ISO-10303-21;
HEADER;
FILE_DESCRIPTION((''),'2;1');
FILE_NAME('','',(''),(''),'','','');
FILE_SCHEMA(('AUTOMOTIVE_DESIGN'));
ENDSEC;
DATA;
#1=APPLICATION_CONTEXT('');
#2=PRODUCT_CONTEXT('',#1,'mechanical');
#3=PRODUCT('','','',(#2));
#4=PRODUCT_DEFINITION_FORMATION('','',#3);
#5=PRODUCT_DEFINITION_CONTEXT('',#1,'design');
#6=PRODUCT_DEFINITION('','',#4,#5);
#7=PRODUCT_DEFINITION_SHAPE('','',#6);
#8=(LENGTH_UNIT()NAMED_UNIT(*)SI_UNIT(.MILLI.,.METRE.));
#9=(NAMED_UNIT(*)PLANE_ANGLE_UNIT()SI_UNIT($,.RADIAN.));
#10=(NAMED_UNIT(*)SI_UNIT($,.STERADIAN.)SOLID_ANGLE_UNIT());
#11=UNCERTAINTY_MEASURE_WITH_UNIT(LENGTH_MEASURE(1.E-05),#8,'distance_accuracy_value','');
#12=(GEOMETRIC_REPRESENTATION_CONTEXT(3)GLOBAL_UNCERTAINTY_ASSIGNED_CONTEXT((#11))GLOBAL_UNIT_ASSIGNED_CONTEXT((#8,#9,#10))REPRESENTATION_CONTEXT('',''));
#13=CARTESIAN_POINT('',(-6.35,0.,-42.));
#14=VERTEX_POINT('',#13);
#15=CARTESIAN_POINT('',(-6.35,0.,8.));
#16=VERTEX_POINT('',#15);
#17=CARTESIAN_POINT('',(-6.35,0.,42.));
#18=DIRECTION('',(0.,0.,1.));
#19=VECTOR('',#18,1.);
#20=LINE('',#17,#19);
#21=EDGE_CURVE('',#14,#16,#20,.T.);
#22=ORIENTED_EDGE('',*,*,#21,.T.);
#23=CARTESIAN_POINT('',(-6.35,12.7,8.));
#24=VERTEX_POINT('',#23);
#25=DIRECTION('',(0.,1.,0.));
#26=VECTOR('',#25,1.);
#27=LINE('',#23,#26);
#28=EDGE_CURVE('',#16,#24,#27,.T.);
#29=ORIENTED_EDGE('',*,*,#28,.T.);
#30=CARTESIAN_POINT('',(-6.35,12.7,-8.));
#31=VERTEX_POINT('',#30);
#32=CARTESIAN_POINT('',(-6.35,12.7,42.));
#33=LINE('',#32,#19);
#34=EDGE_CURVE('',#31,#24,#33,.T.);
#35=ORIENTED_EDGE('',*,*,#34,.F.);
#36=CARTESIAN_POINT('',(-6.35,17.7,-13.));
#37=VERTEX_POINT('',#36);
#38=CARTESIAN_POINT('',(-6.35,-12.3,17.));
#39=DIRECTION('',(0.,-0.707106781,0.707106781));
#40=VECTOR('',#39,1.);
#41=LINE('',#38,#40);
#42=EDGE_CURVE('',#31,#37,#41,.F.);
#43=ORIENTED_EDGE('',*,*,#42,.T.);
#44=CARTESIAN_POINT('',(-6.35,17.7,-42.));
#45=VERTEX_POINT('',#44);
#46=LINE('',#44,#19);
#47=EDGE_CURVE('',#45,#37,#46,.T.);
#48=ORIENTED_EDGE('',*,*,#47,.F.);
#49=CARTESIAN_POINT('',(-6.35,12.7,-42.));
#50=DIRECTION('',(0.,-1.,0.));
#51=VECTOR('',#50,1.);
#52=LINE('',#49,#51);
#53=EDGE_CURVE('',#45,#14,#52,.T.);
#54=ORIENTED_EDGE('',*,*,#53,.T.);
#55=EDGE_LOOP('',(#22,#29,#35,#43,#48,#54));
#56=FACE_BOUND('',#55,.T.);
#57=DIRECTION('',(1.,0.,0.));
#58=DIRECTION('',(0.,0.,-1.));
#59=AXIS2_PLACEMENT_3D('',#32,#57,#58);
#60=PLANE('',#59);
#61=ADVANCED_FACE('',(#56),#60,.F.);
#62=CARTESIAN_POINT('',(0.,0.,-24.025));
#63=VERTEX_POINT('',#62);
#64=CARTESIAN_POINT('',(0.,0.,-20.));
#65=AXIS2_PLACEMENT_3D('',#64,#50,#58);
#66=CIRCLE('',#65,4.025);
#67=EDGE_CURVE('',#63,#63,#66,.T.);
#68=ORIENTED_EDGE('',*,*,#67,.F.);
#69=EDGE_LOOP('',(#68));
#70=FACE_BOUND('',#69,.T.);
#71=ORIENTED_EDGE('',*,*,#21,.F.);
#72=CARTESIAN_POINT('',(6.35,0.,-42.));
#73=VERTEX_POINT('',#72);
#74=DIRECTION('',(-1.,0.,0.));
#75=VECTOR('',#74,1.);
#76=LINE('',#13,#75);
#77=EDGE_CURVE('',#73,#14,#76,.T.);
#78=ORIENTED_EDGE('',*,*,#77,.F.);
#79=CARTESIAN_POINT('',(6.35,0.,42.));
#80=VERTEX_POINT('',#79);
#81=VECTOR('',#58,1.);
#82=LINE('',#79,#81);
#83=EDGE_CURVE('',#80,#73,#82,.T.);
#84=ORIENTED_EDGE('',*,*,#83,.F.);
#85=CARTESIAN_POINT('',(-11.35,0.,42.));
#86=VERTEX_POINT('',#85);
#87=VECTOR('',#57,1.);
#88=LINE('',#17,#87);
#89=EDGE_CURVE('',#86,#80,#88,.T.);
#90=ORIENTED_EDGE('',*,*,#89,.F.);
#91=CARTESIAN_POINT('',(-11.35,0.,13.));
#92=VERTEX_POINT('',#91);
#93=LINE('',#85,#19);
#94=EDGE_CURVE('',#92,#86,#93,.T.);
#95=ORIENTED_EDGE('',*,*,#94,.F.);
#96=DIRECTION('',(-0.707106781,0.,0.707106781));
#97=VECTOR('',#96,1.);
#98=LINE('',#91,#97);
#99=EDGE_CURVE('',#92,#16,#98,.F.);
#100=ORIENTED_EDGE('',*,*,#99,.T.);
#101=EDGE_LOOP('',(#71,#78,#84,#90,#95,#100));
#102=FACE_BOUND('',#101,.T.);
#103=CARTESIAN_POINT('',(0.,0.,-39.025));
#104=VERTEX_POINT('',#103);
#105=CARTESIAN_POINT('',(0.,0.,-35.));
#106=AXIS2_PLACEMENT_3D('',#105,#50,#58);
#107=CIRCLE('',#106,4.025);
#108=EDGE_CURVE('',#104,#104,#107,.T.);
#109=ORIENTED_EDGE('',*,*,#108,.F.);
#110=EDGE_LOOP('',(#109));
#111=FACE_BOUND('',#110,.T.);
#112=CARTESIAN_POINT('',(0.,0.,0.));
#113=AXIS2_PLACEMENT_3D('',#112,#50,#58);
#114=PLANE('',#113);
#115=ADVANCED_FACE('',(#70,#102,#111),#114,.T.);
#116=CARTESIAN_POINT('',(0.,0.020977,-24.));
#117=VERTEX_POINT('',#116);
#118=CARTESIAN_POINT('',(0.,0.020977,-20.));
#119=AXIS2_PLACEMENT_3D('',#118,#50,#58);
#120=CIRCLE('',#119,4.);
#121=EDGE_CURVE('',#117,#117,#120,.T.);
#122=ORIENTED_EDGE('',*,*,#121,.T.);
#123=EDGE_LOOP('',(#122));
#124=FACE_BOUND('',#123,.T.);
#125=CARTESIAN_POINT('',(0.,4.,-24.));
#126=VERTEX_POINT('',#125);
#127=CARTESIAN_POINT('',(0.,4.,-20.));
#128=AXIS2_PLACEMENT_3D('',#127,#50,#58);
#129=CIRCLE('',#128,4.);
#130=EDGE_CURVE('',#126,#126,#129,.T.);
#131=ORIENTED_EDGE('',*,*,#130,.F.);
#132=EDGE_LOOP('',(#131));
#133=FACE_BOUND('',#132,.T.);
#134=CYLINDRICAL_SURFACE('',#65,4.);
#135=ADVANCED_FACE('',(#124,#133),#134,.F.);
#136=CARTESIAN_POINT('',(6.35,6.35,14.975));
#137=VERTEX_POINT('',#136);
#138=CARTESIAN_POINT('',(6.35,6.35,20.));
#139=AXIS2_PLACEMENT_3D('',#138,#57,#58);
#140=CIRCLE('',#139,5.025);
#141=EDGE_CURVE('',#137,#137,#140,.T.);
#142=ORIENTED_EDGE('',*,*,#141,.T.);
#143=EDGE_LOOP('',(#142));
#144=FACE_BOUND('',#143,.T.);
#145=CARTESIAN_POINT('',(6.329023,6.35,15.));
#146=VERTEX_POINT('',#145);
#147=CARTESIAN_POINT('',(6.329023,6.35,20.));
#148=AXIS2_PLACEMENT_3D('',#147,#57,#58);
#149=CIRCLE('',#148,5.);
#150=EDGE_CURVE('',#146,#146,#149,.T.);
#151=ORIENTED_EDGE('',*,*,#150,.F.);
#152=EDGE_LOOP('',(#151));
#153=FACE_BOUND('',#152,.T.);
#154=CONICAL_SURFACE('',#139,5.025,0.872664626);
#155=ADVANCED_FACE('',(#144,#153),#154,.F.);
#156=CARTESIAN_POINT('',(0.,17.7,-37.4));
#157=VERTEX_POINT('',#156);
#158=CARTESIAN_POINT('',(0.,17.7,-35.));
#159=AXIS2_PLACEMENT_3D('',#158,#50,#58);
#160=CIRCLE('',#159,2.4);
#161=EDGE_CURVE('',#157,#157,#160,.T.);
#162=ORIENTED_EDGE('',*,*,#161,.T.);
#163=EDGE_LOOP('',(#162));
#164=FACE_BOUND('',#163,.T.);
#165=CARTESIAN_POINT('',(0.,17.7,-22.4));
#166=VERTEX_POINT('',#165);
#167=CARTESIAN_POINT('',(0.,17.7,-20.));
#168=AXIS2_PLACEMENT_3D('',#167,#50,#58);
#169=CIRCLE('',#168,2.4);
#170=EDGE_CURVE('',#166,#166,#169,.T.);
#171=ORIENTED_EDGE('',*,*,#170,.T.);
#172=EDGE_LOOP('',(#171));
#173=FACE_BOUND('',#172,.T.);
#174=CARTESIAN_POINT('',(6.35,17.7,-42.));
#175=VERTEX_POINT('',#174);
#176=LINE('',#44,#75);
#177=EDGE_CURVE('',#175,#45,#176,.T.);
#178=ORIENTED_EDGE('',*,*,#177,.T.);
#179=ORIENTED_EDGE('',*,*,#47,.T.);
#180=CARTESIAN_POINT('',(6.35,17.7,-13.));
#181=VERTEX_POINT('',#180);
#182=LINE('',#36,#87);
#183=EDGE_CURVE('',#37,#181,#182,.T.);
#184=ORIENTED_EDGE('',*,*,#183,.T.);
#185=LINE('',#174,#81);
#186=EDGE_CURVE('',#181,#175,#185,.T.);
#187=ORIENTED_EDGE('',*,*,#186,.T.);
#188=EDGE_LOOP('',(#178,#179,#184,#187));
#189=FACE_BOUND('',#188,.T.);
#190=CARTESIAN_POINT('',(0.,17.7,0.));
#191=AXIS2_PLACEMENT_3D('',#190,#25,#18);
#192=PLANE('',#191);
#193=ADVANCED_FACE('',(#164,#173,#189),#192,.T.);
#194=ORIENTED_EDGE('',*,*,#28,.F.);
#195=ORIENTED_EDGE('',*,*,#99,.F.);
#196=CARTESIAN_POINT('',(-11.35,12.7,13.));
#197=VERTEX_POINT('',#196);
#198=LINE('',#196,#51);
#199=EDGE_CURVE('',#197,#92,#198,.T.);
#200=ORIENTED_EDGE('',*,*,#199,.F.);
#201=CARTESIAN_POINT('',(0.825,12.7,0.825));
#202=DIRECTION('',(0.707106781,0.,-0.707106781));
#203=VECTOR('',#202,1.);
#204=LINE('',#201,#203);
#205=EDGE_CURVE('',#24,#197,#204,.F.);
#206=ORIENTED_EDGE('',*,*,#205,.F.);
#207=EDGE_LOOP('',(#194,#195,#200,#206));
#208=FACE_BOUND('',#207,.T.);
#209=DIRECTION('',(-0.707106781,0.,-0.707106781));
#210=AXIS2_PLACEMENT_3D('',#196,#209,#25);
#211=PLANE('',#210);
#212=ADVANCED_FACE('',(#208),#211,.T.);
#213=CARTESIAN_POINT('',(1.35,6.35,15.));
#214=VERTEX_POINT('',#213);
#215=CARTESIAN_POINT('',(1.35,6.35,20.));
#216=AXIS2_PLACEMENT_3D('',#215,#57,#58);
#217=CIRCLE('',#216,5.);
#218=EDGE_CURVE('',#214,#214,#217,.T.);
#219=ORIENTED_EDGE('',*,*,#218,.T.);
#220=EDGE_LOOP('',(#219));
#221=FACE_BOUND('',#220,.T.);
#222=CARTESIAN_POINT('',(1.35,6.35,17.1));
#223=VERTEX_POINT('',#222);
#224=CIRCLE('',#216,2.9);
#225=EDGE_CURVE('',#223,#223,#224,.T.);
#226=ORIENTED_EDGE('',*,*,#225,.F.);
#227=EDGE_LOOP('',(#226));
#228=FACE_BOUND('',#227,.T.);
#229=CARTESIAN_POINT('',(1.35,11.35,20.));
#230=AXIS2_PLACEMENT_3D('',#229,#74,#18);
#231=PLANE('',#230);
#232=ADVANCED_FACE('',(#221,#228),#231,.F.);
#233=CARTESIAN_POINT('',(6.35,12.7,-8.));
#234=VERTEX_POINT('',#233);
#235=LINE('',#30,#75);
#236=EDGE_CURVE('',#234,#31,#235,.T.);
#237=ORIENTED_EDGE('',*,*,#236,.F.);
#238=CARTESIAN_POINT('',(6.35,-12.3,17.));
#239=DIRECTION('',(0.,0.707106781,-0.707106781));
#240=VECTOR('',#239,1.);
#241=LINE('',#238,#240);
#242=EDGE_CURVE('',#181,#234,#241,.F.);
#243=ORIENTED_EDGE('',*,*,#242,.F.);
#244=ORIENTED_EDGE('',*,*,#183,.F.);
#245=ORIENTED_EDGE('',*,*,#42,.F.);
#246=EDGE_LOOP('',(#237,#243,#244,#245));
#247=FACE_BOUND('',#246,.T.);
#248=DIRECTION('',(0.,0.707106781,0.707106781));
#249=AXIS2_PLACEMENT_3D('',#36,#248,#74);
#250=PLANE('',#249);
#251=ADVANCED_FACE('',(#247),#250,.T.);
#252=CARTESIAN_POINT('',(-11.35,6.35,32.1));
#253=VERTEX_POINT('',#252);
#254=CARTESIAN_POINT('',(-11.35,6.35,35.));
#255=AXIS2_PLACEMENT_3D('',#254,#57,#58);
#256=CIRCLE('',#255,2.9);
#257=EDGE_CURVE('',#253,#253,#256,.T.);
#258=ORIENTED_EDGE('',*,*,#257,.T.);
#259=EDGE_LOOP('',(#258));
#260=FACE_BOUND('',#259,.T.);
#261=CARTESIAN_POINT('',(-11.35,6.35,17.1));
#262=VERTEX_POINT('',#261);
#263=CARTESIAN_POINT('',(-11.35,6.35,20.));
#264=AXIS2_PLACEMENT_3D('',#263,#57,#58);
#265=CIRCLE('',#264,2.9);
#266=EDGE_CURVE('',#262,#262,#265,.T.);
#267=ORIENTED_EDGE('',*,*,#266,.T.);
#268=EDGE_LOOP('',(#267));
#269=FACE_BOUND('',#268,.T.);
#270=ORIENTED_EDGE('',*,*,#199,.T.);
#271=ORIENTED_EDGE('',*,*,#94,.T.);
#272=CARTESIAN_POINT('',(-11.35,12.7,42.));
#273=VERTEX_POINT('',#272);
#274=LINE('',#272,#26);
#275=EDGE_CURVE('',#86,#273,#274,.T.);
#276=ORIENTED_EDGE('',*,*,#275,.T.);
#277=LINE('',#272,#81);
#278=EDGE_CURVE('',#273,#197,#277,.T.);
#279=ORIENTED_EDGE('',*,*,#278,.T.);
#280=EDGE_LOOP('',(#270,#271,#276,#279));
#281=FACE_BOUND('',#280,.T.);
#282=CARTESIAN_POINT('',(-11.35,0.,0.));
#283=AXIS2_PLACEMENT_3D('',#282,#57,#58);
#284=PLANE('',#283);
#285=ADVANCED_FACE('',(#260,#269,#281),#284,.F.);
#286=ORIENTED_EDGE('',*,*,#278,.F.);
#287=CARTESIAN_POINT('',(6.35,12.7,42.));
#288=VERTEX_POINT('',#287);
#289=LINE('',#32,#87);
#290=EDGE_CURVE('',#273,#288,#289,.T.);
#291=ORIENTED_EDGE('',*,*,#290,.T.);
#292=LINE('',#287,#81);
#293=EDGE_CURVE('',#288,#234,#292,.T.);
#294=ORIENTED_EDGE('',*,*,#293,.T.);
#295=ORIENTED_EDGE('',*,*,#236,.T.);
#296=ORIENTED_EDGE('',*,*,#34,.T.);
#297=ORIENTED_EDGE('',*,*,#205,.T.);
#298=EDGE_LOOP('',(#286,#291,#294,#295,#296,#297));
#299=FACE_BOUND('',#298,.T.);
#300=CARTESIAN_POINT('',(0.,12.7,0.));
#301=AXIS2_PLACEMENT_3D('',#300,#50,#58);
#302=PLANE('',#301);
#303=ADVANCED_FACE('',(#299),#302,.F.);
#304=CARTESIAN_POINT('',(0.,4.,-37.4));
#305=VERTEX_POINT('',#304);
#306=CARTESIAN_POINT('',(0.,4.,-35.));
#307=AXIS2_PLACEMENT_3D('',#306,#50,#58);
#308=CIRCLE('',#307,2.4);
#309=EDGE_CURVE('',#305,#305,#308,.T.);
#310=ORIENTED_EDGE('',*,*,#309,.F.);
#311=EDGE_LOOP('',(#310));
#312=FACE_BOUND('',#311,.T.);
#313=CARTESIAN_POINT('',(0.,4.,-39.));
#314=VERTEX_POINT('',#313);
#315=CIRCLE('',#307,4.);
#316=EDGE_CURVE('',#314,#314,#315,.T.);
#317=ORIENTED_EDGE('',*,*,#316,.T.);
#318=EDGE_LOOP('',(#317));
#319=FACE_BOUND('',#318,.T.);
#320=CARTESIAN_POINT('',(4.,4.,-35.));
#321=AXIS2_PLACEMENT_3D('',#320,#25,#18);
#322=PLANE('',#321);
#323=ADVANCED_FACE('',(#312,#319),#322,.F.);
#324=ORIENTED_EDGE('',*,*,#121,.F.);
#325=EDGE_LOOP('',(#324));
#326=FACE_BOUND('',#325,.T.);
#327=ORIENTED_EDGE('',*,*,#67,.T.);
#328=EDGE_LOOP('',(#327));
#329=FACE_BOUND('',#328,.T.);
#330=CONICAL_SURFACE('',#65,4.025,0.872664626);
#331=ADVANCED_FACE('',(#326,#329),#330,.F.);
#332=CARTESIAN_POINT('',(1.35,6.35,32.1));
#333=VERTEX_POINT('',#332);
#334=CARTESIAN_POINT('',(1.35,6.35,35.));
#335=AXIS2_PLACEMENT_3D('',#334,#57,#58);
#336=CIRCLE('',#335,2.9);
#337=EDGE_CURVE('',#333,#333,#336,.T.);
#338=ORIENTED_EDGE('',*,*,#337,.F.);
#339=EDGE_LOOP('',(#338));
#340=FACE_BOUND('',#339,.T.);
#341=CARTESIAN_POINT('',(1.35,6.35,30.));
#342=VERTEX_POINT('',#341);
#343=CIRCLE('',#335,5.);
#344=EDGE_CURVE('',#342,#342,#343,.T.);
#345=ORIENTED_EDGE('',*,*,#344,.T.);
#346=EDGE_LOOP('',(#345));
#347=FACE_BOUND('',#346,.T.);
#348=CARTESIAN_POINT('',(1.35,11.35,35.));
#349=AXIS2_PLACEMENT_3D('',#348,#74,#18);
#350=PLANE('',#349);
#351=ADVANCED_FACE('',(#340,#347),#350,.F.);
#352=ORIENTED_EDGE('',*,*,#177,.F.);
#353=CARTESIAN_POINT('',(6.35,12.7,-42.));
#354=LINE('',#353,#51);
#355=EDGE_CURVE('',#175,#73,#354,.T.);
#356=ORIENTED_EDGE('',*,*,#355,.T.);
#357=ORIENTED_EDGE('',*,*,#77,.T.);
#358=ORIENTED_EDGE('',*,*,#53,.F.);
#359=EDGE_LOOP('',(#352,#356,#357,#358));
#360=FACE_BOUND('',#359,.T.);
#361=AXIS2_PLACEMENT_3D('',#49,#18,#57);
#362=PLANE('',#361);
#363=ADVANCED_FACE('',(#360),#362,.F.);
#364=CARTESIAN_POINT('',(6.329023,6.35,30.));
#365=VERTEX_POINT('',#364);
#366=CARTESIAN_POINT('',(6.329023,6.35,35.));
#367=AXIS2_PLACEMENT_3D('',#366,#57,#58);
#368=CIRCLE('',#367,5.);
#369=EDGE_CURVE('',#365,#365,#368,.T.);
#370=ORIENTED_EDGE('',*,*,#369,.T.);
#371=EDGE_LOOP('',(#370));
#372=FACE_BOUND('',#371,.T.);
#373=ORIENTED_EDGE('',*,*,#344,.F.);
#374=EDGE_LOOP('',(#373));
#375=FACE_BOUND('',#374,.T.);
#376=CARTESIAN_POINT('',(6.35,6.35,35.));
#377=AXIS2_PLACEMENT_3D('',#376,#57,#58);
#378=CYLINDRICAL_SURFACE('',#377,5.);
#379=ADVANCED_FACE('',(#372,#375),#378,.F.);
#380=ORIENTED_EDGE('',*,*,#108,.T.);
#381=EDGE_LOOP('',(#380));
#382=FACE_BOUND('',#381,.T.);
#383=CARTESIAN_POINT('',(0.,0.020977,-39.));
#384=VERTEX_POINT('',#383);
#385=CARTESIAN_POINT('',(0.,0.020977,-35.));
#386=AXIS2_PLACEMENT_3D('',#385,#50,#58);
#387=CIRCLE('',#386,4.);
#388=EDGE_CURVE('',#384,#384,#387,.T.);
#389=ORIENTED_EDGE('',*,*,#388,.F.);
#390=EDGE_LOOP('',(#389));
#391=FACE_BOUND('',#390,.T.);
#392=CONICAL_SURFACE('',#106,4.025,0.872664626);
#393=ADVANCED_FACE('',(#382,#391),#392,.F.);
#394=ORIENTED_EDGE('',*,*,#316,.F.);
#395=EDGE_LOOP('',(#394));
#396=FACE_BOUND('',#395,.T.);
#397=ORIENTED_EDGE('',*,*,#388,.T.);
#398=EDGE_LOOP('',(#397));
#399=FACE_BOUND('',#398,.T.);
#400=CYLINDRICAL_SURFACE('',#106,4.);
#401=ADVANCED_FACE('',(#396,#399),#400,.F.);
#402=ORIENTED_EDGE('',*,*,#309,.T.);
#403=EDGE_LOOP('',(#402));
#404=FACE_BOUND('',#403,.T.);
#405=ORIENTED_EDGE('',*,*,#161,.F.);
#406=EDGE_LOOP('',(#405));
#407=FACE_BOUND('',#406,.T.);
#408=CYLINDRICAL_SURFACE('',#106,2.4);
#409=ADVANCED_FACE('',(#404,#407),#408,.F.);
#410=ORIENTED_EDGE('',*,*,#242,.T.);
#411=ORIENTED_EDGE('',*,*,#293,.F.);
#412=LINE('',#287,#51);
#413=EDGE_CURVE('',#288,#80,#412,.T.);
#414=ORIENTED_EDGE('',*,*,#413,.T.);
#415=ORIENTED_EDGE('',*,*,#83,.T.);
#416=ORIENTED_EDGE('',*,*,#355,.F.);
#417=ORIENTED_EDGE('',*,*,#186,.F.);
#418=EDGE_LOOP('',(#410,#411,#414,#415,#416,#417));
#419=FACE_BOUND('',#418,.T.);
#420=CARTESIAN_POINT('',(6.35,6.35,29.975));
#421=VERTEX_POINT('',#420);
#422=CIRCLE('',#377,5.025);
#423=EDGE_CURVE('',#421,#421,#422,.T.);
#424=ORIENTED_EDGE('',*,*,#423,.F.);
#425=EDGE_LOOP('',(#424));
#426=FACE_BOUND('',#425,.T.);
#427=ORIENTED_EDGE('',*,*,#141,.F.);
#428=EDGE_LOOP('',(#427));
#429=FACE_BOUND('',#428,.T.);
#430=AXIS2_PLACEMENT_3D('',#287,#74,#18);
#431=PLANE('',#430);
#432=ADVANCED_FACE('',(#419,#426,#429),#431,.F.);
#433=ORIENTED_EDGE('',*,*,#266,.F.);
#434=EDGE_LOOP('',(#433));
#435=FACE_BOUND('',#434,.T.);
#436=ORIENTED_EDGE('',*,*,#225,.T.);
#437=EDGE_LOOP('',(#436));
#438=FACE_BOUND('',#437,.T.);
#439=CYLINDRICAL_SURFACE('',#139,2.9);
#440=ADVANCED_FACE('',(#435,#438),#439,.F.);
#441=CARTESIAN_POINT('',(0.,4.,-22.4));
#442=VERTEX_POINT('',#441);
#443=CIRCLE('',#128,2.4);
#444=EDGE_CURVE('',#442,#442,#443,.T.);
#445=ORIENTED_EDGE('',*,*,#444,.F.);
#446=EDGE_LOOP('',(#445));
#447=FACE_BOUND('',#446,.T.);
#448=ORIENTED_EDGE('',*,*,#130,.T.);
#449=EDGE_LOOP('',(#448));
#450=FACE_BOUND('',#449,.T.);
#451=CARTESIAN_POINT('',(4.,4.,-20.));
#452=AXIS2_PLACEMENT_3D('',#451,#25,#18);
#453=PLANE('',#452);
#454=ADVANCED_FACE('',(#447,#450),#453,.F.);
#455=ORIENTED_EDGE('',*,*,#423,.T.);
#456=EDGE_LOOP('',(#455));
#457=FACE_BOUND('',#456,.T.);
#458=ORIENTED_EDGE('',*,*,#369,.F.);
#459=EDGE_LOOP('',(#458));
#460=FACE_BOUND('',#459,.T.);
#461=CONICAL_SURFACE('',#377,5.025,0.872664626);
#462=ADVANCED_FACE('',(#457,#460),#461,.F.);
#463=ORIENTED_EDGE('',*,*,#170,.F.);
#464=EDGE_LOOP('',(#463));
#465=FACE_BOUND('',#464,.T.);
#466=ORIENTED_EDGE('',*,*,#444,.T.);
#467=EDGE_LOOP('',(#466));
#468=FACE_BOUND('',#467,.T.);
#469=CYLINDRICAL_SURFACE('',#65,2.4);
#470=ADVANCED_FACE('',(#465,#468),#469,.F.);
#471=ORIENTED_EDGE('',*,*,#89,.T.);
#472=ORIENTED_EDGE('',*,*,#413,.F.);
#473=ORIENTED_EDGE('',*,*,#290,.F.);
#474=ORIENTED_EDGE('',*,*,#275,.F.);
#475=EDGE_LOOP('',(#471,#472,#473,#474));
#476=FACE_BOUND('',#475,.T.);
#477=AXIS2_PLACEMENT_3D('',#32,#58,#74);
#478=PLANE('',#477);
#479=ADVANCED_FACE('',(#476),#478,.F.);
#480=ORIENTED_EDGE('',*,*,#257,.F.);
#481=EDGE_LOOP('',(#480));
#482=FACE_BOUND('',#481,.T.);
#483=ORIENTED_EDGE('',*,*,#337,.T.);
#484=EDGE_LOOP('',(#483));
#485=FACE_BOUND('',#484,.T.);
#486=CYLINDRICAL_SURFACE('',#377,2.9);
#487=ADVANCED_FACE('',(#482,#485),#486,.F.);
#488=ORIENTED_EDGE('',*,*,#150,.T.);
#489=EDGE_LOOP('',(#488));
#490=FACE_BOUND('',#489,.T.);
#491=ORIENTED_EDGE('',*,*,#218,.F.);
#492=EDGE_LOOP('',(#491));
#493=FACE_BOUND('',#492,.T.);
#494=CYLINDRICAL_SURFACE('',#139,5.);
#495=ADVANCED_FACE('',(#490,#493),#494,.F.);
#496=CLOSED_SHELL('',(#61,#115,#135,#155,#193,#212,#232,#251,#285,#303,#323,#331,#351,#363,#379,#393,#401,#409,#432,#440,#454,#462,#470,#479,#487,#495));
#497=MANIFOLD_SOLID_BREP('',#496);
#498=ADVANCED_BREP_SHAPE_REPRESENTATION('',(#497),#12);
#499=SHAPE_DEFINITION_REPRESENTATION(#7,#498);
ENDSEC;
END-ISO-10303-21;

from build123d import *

# Parameters (mm, degrees)
SKETCH2_W                     = 12.7
SKETCH2_H                     = 84
BOSS_EXTRUDE1_DEPTH           = 12.7
SKETCH5_W                     = 12.7
SKETCH5_H                     = 29
BOSS_EXTRUDE2_DEPTH           = 5
CBORE_FOR_M4_SHCS1_AT_2_COUNT = 2
CBORE_FOR_M4_SHCS1_AT_2_PITCH = 15
SKETCH8_W                     = 29
SKETCH8_H                     = 12.7
BOSS_EXTRUDE3_DEPTH           = 5
CBORE_FOR_M5_SHCS2_AT_2_COUNT = 2
CBORE_FOR_M5_SHCS2_AT_2_PITCH = 15
CHAMFER1_SIZE                 = 5


with BuildPart() as part:
    # Sketch2 → Boss-Extrude1 (new body)
    with BuildSketch(Plane(origin=(0, 0, 0), x_dir=(1, 0, 0), z_dir=(0, 1, 0))):
        Rectangle(SKETCH2_W, SKETCH2_H)
    extrude(amount=BOSS_EXTRUDE1_DEPTH)

    # Sketch5 → Boss-Extrude2 (add)
    with BuildSketch(Plane(origin=(0, 12.7, 0), x_dir=(1, 0, 0), z_dir=(0, 1, 0))):
        with Locations((0, 27.5)):
            Rectangle(SKETCH5_W, SKETCH5_H)
    extrude(amount=BOSS_EXTRUDE2_DEPTH)

    # Sketch4 → CBORE for M4 SHCS1 (revolve, cut)
    with BuildSketch(Plane(origin=(0, 0, -35), x_dir=(0, 0, -1), z_dir=(1, 0, 0))):
        Polygon((0, 0), (0, 17.7), (2.4, 17.7), (2.4, 4), (4, 4), (4, 0.020977491), (4.025, 0), align=None)
    cbore_for_m4_shcs1 = revolve(axis=Axis((0, -6.35, -35), (0, 1, 0)), mode=Mode.SUBTRACT)

    # CBORE for M4 SHCS1 at 2: CBORE for M4 SHCS1 ×2
    with Locations(*[(0, 0, i * CBORE_FOR_M4_SHCS1_AT_2_PITCH) for i in range(1, CBORE_FOR_M4_SHCS1_AT_2_COUNT)]):
        add(cbore_for_m4_shcs1, mode=Mode.SUBTRACT)

    # Sketch8 → Boss-Extrude3 (add)
    with BuildSketch(Plane.ZY.offset(6.35)):
        with Locations((27.5, 6.35)):
            Rectangle(SKETCH8_W, SKETCH8_H)
    extrude(amount=BOSS_EXTRUDE3_DEPTH)

    # Sketch7 → CBORE for M5 SHCS2 (revolve, cut)
    with BuildSketch(Plane(origin=(6.35, 6.35, 35), x_dir=(0, 0, -1), z_dir=(0, 1, 0))):
        Polygon((0, 0), (0, 17.7), (2.9, 17.7), (2.9, 5), (5, 5), (5, 0.020977491), (5.025, 0), align=None)
    cbore_for_m5_shcs2 = revolve(axis=Axis((12.7, 6.35, 35), (-1, 0, 0)), mode=Mode.SUBTRACT)

    # CBORE for M5 SHCS2 at 2: CBORE for M5 SHCS2 ×2
    with Locations(*[(0, 0, -i * CBORE_FOR_M5_SHCS2_AT_2_PITCH) for i in range(1, CBORE_FOR_M5_SHCS2_AT_2_COUNT)]):
        add(cbore_for_m5_shcs2, mode=Mode.SUBTRACT)

    # Chamfer1
    chamfer1_edges = [part.edges().sort_by_distance(p)[0] for p in [
        (0, 12.7, -13),
        (-6.35, 6.35, 13),
    ]]
    chamfer(chamfer1_edges, length=CHAMFER1_SIZE - 0.0001)  # a hair under: the kernel refuses the full size


solid = part.part
